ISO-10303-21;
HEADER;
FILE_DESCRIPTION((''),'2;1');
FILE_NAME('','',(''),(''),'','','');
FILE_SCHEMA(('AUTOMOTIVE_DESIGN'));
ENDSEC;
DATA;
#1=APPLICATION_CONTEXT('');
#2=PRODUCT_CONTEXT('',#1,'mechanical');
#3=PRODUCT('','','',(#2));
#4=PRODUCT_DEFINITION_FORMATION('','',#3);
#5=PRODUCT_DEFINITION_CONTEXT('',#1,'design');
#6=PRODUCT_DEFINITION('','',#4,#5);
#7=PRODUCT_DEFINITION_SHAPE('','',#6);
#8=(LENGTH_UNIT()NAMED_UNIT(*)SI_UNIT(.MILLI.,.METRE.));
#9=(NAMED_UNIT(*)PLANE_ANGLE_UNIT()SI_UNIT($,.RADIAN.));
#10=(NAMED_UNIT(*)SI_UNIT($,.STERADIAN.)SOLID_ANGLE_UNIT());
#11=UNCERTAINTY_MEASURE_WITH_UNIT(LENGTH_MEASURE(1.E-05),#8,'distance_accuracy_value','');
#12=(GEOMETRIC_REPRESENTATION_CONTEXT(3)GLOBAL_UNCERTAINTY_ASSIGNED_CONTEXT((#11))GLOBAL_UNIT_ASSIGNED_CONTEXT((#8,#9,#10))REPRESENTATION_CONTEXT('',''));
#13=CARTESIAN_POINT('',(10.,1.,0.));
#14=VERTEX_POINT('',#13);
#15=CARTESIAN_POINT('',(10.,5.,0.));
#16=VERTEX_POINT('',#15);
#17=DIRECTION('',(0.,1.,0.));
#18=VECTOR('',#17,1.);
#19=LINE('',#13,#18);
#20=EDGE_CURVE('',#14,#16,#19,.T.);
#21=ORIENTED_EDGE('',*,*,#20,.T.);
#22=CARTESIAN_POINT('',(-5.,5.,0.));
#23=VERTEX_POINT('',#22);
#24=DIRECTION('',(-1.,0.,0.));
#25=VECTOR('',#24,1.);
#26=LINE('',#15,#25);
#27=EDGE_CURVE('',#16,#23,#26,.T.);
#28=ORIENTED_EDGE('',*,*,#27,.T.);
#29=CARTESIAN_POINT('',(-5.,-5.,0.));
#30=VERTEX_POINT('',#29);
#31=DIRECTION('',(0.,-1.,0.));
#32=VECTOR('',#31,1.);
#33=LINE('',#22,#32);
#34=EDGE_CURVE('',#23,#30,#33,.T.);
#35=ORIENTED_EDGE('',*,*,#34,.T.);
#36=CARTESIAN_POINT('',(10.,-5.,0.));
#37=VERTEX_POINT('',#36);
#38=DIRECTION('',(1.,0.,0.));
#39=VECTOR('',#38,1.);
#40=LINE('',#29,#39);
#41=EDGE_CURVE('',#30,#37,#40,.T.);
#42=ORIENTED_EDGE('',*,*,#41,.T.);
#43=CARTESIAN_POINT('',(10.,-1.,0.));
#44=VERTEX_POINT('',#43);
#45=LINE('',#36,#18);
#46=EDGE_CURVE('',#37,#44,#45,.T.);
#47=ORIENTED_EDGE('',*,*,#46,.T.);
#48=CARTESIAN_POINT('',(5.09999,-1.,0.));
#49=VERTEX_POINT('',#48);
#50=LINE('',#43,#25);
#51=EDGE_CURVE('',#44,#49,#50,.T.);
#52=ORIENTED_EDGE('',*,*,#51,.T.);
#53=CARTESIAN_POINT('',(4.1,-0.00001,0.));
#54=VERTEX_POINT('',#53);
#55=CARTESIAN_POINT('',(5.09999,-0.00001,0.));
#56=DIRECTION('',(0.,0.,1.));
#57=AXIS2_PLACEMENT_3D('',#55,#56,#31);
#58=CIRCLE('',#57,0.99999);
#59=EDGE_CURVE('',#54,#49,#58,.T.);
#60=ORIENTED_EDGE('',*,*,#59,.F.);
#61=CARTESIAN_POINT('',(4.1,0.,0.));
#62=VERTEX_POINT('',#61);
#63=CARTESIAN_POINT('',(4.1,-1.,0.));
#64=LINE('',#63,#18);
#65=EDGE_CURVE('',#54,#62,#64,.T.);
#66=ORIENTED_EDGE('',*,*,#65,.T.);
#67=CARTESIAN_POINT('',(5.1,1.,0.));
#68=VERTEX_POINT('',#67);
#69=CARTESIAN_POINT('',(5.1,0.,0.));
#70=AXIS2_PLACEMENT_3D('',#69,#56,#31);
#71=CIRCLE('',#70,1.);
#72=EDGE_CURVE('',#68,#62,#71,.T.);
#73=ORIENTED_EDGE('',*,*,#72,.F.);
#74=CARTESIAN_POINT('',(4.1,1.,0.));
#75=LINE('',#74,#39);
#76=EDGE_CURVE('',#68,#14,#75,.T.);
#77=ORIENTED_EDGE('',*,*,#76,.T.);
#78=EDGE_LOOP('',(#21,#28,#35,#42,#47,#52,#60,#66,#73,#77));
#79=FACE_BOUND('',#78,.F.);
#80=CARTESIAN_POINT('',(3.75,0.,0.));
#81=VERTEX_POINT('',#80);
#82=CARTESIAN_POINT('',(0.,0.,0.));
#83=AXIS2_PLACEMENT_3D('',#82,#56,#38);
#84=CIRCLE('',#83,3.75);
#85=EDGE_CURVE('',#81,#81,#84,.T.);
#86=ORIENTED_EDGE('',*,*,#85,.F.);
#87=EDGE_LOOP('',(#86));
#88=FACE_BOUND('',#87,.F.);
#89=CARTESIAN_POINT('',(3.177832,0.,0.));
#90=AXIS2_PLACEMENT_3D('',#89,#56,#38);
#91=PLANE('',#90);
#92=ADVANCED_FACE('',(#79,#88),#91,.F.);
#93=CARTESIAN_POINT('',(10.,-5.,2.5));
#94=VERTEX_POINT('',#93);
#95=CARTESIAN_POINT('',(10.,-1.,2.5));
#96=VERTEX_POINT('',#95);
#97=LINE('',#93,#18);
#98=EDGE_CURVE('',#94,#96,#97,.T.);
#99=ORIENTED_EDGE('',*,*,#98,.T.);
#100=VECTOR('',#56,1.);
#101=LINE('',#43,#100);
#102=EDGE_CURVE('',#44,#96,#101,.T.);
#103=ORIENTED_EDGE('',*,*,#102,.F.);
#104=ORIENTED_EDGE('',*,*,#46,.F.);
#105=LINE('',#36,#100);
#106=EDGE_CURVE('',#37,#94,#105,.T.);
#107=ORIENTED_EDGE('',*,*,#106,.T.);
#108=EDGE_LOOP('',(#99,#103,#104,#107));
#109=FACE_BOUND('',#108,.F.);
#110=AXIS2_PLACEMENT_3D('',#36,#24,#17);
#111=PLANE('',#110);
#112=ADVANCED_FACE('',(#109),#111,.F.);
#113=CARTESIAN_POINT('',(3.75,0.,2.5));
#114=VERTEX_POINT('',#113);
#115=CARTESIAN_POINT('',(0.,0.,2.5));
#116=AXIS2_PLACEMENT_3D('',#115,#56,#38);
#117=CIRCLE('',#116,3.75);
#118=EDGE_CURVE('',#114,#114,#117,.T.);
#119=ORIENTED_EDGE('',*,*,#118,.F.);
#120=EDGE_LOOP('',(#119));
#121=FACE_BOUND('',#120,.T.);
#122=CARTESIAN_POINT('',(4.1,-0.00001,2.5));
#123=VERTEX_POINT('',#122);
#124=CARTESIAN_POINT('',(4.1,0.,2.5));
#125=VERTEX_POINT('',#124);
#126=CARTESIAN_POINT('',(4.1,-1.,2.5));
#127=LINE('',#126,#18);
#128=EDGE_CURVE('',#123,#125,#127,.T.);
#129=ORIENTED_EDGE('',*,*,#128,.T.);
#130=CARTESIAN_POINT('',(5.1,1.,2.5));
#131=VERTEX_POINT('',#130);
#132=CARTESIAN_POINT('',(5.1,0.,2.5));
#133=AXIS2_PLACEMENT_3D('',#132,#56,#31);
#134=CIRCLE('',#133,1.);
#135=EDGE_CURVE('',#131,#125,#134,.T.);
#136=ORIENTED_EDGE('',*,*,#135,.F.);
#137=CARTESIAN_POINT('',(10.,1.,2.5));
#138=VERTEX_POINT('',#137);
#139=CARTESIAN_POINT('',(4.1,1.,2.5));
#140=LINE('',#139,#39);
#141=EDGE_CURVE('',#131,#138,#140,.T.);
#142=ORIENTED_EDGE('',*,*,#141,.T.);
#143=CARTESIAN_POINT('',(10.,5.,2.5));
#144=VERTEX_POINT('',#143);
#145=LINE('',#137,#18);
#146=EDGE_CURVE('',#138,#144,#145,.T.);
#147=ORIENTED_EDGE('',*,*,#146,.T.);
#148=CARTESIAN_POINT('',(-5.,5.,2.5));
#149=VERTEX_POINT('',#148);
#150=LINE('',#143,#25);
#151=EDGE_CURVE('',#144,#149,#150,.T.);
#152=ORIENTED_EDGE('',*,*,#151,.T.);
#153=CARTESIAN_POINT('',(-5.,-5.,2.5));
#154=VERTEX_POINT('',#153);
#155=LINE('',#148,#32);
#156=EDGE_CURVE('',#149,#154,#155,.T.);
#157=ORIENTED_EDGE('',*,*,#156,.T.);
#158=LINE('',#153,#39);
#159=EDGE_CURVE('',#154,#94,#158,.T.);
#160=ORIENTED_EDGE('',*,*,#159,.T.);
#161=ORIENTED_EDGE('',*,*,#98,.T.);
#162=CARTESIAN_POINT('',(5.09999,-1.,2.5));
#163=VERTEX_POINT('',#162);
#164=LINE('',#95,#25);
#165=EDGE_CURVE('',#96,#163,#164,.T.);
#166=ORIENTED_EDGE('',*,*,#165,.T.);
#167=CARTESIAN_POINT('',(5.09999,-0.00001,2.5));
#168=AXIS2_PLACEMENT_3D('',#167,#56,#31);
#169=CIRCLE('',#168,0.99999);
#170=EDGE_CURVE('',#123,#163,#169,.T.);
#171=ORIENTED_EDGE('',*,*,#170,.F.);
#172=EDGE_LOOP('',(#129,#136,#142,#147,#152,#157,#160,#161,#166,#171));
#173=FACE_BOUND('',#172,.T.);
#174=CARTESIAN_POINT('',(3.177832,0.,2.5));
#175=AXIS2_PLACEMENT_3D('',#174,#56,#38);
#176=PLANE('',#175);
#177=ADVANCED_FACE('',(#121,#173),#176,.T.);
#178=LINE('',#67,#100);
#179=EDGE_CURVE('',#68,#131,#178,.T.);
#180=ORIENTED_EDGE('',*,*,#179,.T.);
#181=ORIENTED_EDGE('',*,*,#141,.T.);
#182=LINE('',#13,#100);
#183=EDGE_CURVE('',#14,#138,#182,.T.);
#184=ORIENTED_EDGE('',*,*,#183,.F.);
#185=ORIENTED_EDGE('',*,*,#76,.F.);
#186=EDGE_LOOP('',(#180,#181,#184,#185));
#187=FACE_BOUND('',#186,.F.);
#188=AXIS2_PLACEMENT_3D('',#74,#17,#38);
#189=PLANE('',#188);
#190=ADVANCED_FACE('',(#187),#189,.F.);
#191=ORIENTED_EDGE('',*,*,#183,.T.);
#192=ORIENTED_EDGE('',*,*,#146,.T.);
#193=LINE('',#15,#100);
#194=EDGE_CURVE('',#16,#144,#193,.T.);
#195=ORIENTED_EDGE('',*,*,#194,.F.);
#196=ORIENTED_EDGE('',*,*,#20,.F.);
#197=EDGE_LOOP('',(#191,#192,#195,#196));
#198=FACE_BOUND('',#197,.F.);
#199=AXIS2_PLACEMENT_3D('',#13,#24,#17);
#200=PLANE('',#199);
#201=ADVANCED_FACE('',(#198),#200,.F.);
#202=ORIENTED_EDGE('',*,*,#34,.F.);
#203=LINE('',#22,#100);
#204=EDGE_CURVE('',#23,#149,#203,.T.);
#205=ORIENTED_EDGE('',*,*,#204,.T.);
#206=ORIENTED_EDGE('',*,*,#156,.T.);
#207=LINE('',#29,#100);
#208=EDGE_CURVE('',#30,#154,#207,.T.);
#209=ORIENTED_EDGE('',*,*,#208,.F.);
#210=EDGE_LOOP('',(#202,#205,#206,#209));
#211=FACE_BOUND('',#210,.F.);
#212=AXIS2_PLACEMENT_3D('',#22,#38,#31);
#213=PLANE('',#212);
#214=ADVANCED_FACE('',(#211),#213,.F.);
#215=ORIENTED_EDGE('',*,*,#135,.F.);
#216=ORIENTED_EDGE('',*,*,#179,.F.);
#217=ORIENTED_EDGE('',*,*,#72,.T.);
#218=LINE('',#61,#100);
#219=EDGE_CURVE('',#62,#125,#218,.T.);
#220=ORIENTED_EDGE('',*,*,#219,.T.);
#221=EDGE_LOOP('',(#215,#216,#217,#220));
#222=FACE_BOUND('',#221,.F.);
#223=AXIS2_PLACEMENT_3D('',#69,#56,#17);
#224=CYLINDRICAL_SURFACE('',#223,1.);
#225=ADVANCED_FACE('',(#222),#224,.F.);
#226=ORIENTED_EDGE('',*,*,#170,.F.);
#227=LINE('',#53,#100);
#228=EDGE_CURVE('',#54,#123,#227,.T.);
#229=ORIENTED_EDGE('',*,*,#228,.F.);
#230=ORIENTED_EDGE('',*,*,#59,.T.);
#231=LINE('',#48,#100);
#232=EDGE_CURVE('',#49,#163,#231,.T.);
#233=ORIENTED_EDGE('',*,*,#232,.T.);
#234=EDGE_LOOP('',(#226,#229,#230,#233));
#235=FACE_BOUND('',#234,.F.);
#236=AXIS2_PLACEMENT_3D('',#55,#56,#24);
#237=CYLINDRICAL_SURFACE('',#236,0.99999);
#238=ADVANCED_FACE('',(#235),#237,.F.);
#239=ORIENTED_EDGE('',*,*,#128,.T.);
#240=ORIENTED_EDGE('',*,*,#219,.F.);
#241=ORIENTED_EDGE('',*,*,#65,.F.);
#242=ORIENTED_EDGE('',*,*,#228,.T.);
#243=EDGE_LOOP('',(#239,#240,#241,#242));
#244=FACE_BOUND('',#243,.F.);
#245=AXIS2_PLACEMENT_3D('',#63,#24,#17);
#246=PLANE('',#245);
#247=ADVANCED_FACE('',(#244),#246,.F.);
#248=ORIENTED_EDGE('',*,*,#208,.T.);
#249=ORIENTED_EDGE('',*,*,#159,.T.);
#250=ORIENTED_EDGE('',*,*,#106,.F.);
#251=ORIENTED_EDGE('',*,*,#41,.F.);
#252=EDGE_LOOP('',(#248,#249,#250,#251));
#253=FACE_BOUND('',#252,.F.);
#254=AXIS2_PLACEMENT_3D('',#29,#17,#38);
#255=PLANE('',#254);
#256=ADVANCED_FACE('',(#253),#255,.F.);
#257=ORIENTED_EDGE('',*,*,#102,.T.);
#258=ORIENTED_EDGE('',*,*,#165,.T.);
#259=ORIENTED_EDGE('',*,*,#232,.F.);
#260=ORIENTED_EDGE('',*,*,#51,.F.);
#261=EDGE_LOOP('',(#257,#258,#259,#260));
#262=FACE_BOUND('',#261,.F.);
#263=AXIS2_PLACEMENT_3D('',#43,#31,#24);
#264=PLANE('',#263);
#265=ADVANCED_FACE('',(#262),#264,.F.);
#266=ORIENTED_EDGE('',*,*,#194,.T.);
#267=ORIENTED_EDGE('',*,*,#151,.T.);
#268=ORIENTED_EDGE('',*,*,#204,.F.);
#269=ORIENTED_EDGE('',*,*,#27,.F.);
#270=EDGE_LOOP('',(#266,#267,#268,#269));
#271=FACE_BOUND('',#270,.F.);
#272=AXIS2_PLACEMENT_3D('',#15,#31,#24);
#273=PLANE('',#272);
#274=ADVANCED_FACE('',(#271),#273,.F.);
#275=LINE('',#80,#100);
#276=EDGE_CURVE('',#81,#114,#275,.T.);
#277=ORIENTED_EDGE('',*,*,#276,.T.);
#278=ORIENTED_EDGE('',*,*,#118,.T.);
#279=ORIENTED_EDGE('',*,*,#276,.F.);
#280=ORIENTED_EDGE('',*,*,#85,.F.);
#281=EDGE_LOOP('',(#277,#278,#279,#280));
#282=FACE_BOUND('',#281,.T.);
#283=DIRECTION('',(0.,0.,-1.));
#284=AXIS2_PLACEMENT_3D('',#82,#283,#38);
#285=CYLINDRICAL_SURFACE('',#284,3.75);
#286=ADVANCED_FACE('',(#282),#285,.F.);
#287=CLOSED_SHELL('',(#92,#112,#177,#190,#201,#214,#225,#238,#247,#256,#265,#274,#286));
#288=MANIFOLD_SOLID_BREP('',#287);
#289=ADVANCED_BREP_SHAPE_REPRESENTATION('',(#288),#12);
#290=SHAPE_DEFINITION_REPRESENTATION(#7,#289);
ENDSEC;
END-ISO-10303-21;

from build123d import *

# Parameters (mm, degrees)
F0_R     = 3.75
F1_DEPTH = 2.5
F2_R     = 1
F3_R     = 0.99999


# Not quite as in the source:
# - a fillet or chamfer is up to 0.001 mm smaller than in the source, because OpenCascade refuses the exact size


with BuildPart() as f1:
    # F0 (on Top) → F1 (new body)
    with BuildSketch(Plane.XY):
        Polygon((10, 5), (-5, 5), (-5, -5), (10, -5), (10, -2.5), (10, -1), (4.1, -1), (4.1, 1), (10, 1), (10, 2.5), align=None)
        Circle(F0_R, mode=Mode.SUBTRACT)
    extrude(amount=F1_DEPTH)

    # F2
    f2_edges = [f1.edges().sort_by_distance(p)[0] for p in [
        (4.1, 1, 1.25),
    ]]
    fillet(f2_edges, radius=F2_R)

    # F3 (radius 1 in the source; OpenCascade refuses exactly that, so slightly less here)
    f3_edges = [f1.edges().sort_by_distance(p)[0] for p in [
        (4.1, -1, 1.25),
    ]]
    fillet(f3_edges, radius=F3_R)


solid = f1.part
